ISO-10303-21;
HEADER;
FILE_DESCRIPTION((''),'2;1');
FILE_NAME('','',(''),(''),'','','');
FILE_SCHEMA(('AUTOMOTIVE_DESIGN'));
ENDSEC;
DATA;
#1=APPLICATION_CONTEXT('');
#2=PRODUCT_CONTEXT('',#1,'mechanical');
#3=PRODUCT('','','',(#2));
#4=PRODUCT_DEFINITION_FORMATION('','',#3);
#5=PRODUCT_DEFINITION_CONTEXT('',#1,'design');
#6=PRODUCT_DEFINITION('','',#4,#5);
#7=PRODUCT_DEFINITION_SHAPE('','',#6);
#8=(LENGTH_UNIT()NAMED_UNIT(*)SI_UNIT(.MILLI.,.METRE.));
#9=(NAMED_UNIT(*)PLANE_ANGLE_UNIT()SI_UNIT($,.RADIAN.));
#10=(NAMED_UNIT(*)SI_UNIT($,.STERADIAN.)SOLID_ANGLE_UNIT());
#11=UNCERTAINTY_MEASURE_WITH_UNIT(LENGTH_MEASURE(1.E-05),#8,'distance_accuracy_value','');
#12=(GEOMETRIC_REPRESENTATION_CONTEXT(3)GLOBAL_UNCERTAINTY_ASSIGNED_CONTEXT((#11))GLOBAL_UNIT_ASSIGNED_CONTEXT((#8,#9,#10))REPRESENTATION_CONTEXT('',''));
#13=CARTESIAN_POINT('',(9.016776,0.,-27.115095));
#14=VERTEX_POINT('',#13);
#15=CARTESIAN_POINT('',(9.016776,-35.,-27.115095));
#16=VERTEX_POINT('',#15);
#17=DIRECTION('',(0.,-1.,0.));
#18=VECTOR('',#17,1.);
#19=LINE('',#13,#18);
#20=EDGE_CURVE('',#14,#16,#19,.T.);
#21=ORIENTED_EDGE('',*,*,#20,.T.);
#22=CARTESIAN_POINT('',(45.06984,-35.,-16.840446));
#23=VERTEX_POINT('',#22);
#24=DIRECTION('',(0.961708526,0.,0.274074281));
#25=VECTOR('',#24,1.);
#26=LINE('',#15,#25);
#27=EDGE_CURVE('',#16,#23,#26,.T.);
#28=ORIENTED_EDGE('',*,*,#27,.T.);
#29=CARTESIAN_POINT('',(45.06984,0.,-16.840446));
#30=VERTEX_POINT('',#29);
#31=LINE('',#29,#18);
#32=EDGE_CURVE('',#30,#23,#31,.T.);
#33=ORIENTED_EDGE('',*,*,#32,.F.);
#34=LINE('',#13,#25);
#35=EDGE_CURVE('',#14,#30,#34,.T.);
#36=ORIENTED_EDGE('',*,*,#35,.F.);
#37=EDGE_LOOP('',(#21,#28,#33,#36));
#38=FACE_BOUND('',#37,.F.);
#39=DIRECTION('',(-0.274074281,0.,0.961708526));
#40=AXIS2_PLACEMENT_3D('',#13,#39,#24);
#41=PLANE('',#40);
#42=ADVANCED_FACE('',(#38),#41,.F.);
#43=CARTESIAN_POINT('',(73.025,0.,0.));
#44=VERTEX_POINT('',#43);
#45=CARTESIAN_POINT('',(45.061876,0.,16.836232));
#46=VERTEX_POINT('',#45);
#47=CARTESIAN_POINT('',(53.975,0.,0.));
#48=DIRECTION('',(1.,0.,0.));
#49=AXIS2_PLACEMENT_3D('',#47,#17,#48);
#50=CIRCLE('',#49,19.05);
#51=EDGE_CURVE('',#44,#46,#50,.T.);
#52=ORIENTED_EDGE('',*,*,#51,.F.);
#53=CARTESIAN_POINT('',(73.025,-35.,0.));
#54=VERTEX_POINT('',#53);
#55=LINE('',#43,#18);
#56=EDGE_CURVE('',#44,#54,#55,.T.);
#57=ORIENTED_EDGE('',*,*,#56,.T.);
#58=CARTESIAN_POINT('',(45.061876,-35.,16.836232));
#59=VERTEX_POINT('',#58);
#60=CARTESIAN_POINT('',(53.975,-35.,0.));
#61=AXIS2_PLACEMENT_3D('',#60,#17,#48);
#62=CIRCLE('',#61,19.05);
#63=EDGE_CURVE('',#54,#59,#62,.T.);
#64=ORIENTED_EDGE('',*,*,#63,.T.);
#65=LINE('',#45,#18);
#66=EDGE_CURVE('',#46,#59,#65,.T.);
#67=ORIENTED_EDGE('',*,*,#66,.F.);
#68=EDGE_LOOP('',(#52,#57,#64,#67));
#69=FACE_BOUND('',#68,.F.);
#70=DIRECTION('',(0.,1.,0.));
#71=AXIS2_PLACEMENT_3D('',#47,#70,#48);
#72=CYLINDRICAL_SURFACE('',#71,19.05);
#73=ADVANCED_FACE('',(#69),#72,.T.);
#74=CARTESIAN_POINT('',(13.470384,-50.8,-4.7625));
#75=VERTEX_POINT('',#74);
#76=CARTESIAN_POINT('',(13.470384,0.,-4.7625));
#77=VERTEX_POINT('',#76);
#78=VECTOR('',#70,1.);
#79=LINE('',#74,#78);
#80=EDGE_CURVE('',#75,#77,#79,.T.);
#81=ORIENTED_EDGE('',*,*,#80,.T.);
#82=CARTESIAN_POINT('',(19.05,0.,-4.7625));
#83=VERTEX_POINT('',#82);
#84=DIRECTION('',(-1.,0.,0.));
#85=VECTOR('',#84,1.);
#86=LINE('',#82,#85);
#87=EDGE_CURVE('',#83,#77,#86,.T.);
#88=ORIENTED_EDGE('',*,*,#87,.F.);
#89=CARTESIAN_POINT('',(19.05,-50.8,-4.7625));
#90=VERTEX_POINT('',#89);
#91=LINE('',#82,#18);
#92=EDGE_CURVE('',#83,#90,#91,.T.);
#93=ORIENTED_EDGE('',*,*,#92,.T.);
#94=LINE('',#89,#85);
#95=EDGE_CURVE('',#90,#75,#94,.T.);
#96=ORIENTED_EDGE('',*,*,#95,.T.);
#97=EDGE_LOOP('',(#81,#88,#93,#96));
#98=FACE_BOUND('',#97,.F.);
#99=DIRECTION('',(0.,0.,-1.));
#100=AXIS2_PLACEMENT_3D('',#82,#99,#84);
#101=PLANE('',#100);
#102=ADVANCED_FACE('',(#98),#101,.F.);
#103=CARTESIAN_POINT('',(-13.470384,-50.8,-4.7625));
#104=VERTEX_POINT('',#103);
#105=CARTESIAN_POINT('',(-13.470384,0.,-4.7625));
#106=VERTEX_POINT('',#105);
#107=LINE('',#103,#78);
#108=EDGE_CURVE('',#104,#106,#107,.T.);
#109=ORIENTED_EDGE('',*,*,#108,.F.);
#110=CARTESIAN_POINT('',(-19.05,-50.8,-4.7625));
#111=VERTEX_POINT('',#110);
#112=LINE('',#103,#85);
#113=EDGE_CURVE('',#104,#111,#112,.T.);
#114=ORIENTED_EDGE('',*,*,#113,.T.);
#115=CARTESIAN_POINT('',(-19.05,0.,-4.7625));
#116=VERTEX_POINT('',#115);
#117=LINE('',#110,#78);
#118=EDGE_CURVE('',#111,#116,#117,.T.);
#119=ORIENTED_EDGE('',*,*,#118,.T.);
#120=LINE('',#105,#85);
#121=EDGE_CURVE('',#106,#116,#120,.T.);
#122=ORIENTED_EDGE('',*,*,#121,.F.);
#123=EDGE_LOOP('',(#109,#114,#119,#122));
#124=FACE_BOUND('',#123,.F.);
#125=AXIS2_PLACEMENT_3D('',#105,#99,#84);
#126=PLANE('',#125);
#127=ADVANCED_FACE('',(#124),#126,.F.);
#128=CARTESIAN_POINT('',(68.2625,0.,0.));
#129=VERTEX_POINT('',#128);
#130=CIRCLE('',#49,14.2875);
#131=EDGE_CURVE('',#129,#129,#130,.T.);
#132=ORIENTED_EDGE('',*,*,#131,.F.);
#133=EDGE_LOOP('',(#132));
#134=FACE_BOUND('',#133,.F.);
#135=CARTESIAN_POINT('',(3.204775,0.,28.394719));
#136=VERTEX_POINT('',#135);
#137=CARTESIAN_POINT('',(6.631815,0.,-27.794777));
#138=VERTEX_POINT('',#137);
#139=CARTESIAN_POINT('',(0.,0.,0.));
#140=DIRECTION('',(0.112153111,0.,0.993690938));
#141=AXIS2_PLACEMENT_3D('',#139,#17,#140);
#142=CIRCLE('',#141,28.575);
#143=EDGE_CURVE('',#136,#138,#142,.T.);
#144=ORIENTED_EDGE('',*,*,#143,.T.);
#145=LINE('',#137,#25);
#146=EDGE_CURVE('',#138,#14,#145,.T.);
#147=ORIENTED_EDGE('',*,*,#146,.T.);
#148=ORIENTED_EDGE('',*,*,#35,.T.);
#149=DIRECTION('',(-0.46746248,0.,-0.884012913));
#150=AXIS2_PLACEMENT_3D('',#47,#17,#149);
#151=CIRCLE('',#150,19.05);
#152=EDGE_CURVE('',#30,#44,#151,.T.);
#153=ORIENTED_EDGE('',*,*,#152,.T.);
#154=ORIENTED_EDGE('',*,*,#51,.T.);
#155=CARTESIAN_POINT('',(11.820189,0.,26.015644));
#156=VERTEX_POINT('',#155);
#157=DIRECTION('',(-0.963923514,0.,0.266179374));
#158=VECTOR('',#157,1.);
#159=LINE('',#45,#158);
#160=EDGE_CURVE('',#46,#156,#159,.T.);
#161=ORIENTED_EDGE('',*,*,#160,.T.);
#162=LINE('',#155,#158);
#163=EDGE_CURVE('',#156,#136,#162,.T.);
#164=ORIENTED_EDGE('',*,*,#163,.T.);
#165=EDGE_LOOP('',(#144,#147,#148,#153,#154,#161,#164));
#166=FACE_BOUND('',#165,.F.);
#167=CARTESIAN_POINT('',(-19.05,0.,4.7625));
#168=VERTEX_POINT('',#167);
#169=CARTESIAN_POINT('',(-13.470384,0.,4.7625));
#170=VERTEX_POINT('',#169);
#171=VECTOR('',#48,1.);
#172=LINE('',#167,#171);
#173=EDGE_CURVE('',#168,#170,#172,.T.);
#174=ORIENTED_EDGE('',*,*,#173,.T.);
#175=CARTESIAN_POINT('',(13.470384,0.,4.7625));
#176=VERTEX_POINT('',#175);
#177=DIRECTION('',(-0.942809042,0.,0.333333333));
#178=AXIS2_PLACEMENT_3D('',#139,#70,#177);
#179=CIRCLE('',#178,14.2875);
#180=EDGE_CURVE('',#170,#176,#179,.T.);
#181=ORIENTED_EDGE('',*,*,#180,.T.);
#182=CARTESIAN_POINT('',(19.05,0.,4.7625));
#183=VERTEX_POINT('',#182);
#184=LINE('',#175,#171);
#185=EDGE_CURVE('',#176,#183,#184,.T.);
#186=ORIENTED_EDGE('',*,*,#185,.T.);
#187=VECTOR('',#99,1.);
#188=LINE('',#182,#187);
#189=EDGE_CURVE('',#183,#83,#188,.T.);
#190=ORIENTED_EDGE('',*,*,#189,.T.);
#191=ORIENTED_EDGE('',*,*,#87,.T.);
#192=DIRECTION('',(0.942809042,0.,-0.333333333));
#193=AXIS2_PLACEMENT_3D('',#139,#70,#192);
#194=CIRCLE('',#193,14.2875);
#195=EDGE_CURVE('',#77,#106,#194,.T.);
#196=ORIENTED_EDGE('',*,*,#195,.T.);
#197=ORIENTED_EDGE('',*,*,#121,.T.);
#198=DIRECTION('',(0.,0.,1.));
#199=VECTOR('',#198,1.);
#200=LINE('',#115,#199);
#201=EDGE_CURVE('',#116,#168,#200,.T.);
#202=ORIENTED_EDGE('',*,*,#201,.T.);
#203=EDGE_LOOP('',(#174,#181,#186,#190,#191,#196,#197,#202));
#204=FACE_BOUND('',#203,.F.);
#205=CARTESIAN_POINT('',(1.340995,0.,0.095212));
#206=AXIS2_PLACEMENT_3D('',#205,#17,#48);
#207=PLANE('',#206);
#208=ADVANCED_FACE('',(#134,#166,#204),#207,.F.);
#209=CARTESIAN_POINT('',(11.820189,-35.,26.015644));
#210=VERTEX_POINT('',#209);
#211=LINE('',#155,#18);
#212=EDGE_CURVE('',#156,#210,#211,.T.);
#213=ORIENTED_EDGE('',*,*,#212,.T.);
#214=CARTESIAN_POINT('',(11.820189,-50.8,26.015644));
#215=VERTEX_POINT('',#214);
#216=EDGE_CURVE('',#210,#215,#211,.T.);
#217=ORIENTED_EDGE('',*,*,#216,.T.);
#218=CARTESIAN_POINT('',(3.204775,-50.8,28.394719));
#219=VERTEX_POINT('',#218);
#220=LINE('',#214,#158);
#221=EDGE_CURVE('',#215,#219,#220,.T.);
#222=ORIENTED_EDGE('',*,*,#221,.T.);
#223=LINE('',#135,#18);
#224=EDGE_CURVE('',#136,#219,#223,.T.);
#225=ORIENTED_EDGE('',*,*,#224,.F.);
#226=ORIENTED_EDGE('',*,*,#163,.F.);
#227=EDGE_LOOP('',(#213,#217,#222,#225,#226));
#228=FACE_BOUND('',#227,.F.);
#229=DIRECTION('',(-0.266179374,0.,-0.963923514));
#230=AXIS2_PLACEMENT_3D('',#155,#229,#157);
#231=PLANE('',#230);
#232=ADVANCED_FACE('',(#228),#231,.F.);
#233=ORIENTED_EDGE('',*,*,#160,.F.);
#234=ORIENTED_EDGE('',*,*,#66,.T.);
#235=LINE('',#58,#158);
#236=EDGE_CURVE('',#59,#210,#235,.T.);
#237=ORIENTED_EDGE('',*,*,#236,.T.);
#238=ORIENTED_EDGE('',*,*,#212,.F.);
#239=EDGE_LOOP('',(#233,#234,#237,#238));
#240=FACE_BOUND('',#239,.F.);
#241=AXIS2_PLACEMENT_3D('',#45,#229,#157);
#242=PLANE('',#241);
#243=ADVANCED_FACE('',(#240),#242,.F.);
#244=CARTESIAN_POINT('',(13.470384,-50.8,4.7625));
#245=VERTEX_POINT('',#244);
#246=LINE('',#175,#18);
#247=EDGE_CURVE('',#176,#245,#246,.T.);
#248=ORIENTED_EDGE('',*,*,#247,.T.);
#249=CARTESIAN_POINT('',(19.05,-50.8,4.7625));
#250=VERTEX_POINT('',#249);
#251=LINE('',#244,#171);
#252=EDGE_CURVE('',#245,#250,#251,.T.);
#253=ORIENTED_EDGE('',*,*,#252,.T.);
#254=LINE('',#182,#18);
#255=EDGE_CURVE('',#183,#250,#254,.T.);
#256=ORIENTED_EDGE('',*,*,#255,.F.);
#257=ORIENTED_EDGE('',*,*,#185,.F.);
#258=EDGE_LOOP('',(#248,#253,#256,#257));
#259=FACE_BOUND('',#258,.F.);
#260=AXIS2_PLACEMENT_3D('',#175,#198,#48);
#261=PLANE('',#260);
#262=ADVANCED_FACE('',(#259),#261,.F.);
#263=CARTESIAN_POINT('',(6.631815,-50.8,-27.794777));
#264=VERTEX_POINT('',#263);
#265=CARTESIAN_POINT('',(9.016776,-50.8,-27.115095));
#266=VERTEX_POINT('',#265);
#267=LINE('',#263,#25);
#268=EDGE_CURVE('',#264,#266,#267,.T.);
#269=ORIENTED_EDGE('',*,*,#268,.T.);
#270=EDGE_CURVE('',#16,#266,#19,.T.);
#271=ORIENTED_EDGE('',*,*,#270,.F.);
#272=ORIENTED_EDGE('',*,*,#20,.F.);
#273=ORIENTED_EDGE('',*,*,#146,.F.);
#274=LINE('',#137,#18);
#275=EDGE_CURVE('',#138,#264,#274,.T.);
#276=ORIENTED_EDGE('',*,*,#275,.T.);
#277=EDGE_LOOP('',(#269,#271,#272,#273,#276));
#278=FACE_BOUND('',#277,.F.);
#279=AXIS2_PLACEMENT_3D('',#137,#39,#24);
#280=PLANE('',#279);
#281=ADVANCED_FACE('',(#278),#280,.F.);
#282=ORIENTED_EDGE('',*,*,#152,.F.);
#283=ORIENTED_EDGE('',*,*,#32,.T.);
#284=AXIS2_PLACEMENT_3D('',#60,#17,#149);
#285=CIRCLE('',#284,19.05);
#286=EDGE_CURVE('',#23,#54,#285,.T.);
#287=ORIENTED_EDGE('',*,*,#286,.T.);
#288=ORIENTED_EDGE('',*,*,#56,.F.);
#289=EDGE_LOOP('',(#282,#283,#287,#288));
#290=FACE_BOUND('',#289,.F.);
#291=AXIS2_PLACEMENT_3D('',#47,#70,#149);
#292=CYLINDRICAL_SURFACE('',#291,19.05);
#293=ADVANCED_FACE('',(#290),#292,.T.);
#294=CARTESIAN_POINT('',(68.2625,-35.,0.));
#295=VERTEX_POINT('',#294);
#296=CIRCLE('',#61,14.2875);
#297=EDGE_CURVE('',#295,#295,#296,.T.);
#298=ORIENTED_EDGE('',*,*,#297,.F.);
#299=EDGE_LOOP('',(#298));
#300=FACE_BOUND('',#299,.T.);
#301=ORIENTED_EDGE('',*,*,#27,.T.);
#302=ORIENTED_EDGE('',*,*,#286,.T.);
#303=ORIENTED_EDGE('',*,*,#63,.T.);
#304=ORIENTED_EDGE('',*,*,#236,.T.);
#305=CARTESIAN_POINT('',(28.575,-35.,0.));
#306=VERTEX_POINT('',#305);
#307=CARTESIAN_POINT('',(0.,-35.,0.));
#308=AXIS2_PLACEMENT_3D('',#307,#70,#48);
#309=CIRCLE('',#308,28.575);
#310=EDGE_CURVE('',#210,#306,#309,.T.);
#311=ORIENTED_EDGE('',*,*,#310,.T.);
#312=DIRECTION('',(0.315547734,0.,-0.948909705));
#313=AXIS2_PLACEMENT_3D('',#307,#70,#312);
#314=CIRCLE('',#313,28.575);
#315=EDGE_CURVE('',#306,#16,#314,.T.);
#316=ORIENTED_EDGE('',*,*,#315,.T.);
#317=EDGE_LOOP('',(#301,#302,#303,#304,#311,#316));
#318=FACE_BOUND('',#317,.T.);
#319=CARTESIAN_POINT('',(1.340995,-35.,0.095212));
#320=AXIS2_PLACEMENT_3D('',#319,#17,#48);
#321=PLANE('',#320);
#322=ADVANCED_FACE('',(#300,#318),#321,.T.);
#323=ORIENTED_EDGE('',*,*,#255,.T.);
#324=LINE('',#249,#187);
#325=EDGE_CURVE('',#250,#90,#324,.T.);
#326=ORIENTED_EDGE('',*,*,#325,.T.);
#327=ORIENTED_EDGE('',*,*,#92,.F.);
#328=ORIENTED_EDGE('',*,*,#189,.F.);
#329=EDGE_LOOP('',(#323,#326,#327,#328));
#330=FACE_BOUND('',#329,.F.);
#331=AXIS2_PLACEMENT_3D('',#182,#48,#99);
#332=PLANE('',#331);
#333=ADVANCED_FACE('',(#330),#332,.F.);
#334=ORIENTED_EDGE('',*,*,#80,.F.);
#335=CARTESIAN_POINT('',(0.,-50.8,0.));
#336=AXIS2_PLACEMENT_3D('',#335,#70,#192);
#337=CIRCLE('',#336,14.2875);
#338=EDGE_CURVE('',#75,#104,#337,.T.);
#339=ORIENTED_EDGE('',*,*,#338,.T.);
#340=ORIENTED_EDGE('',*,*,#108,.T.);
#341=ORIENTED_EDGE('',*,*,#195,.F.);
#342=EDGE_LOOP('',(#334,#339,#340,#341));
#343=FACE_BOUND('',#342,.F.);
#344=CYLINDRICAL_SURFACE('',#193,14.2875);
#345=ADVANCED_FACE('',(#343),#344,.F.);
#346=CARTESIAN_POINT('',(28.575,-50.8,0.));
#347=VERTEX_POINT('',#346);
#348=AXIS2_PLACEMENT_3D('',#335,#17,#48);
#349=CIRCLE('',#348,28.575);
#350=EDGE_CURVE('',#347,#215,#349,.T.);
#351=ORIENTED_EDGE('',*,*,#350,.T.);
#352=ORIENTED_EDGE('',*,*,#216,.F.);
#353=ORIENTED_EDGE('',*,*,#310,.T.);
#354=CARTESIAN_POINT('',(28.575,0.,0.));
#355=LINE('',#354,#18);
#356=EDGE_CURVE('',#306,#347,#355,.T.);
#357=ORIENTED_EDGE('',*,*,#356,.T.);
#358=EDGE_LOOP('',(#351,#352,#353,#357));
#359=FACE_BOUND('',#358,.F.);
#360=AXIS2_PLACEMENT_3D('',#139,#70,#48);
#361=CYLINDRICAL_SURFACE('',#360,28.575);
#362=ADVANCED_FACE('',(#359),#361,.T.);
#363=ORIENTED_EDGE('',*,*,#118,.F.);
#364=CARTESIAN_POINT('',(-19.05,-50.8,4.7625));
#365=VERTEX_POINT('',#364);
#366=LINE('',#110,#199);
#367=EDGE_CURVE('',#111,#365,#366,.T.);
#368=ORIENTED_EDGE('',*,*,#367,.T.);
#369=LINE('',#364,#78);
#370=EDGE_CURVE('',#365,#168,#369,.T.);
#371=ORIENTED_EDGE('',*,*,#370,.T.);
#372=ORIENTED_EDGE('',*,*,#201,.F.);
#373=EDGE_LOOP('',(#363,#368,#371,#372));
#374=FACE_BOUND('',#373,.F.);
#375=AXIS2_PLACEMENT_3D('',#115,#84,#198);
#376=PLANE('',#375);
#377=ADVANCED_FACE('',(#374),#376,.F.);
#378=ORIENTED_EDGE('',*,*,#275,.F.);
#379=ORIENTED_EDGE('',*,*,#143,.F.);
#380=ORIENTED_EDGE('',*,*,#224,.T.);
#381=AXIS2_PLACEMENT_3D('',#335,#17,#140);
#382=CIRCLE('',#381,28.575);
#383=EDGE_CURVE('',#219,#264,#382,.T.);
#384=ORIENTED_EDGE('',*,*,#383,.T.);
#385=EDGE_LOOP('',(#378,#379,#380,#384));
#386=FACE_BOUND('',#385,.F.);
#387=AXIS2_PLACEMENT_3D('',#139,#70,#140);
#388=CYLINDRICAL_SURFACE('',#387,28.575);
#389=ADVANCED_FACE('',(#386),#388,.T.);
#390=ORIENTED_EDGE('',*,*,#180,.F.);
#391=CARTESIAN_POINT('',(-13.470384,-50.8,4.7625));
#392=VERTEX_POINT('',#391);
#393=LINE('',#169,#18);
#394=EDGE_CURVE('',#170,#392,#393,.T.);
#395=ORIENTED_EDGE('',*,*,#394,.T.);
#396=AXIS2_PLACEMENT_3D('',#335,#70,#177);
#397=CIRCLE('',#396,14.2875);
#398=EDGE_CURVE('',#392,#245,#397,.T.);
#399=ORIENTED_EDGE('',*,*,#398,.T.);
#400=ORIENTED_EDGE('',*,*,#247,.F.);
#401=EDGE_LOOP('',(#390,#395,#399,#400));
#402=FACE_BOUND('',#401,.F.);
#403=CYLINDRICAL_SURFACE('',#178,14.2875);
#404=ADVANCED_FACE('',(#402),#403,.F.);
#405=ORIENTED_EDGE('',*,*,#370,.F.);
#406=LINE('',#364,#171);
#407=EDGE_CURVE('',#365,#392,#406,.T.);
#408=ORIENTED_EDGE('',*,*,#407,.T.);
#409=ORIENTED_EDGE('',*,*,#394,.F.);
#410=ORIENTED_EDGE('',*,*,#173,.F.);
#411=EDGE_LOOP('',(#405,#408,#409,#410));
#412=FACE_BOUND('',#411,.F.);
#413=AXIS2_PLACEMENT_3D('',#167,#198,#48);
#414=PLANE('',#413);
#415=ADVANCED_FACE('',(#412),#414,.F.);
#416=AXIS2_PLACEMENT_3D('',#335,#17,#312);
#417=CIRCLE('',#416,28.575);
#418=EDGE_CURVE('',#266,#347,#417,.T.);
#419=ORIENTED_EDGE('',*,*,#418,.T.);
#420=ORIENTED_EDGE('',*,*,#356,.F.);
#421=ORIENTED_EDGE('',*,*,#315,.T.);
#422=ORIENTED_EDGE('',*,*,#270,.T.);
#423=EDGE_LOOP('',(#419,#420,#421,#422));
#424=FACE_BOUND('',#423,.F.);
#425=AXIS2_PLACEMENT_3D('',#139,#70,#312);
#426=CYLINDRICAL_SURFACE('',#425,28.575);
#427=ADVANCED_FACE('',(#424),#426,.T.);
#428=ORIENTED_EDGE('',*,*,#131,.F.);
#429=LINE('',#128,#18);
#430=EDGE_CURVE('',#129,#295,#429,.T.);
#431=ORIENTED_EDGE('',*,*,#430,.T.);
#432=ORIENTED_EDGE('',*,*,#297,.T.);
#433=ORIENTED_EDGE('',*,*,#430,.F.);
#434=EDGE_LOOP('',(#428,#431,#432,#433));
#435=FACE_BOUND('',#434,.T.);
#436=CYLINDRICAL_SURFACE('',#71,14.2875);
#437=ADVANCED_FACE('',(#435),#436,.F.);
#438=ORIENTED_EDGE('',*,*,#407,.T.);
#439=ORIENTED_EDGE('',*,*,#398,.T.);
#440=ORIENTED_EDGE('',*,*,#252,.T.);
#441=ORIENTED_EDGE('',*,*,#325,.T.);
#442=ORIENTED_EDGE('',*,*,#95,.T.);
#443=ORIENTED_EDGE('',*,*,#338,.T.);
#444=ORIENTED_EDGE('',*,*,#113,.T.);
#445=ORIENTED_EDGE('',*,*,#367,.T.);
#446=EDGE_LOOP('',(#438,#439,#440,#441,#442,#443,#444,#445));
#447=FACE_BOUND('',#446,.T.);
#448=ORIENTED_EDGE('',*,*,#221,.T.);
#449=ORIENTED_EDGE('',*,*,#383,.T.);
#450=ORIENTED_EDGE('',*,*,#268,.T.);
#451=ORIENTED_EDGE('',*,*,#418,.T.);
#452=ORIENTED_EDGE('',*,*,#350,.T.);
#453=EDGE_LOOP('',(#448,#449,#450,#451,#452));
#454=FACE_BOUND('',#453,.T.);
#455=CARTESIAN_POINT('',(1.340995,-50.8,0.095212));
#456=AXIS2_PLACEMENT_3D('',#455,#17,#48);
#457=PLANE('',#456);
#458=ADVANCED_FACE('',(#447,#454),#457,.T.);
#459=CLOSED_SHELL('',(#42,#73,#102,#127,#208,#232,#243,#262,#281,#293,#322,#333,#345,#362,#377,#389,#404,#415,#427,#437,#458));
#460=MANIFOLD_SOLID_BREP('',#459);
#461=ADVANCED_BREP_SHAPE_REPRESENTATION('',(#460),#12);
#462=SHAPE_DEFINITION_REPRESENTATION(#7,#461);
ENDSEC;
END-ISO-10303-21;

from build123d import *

# Parameters (mm, degrees)
F0_R     = 14.2875
F1_DEPTH = 35
F2_DEPTH = 50.8


with BuildPart() as f1:
    # F0 (on Front) → F1 (new body)
    with BuildSketch(Plane.XZ):
        with BuildLine():
            Line((11.8201890877, 26.0156444266), (3.2047751505, 28.3947185447))
            ThreePointArc((3.2047751505, 28.3947185447), (-28.5220001461, -1.739578301), (6.631814894, -27.7947774989))
            Line((6.631814894, -27.7947774989), (9.0167764908, -27.1150948129))
            ThreePointArc((9.0167764908, -27.1150948129), (23.1752563441, -16.7164026748), (28.575, 0))
            ThreePointArc((28.575, 0), (24.0238686329, 15.47205096), (11.8201890877, 26.0156444266))
        make_face()
        with BuildLine():
            ThreePointArc((-13.4703841816, 4.7625), (0, 14.2875), (13.4703841816, 4.7625))
            Line((13.4703841816, 4.7625), (19.05, 4.7625))
            Line((19.05, 4.7625), (19.05, -4.7625))
            Line((19.05, -4.7625), (13.4703841816, -4.7625))
            ThreePointArc((13.4703841816, -4.7625), (0, -14.2875), (-13.4703841816, -4.7625))
            Line((-13.4703841816, -4.7625), (-19.05, -4.7625))
            Line((-19.05, -4.7625), (-19.05, 4.7625))
            Line((-19.05, 4.7625), (-13.4703841816, 4.7625))
        make_face(mode=Mode.SUBTRACT)
        with BuildLine():
            Line((45.0618756476, 16.8362321877), (11.8201890877, 26.0156444266))
            ThreePointArc((11.8201890877, 26.0156444266), (24.0238686329, 15.47205096), (28.575, 0))
            ThreePointArc((28.575, 0), (23.1752563441, -16.7164026748), (9.0167764908, -27.1150948129))
            Line((9.0167764908, -27.1150948129), (45.0698397536, -16.8404459854))
            ThreePointArc((45.0698397536, -16.8404459854), (34.9250005327, -0.0045050825), (45.0618756476, 16.8362321877))
        make_face()
        with BuildLine():
            ThreePointArc((73.025, 0), (63.8011762931, 16.3201948351), (45.0618756476, 16.8362321877))
            ThreePointArc((45.0618756476, 16.8362321877), (34.9250005327, -0.0045050825), (45.0698397536, -16.8404459854))
            ThreePointArc((45.0698397536, -16.8404459854), (63.8050355367, -16.3178706131), (73.025, 0))
        make_face()
        with Locations((53.975, 0)):
            Circle(F0_R, mode=Mode.SUBTRACT)
    extrude(amount=F1_DEPTH)

    # F0 (on Front) → F2 (join)
    with BuildSketch(Plane.XZ):
        with BuildLine():
            Line((11.8201890877, 26.0156444266), (3.2047751505, 28.3947185447))
            ThreePointArc((3.2047751505, 28.3947185447), (-28.5220001461, -1.739578301), (6.631814894, -27.7947774989))
            Line((6.631814894, -27.7947774989), (9.0167764908, -27.1150948129))
            ThreePointArc((9.0167764908, -27.1150948129), (23.1752563441, -16.7164026748), (28.575, 0))
            ThreePointArc((28.575, 0), (24.0238686329, 15.47205096), (11.8201890877, 26.0156444266))
        make_face()
        with BuildLine():
            ThreePointArc((-13.4703841816, 4.7625), (0, 14.2875), (13.4703841816, 4.7625))
            Line((13.4703841816, 4.7625), (19.05, 4.7625))
            Line((19.05, 4.7625), (19.05, -4.7625))
            Line((19.05, -4.7625), (13.4703841816, -4.7625))
            ThreePointArc((13.4703841816, -4.7625), (0, -14.2875), (-13.4703841816, -4.7625))
            Line((-13.4703841816, -4.7625), (-19.05, -4.7625))
            Line((-19.05, -4.7625), (-19.05, 4.7625))
            Line((-19.05, 4.7625), (-13.4703841816, 4.7625))
        make_face(mode=Mode.SUBTRACT)
    extrude(amount=F2_DEPTH)


solid = f1.part
